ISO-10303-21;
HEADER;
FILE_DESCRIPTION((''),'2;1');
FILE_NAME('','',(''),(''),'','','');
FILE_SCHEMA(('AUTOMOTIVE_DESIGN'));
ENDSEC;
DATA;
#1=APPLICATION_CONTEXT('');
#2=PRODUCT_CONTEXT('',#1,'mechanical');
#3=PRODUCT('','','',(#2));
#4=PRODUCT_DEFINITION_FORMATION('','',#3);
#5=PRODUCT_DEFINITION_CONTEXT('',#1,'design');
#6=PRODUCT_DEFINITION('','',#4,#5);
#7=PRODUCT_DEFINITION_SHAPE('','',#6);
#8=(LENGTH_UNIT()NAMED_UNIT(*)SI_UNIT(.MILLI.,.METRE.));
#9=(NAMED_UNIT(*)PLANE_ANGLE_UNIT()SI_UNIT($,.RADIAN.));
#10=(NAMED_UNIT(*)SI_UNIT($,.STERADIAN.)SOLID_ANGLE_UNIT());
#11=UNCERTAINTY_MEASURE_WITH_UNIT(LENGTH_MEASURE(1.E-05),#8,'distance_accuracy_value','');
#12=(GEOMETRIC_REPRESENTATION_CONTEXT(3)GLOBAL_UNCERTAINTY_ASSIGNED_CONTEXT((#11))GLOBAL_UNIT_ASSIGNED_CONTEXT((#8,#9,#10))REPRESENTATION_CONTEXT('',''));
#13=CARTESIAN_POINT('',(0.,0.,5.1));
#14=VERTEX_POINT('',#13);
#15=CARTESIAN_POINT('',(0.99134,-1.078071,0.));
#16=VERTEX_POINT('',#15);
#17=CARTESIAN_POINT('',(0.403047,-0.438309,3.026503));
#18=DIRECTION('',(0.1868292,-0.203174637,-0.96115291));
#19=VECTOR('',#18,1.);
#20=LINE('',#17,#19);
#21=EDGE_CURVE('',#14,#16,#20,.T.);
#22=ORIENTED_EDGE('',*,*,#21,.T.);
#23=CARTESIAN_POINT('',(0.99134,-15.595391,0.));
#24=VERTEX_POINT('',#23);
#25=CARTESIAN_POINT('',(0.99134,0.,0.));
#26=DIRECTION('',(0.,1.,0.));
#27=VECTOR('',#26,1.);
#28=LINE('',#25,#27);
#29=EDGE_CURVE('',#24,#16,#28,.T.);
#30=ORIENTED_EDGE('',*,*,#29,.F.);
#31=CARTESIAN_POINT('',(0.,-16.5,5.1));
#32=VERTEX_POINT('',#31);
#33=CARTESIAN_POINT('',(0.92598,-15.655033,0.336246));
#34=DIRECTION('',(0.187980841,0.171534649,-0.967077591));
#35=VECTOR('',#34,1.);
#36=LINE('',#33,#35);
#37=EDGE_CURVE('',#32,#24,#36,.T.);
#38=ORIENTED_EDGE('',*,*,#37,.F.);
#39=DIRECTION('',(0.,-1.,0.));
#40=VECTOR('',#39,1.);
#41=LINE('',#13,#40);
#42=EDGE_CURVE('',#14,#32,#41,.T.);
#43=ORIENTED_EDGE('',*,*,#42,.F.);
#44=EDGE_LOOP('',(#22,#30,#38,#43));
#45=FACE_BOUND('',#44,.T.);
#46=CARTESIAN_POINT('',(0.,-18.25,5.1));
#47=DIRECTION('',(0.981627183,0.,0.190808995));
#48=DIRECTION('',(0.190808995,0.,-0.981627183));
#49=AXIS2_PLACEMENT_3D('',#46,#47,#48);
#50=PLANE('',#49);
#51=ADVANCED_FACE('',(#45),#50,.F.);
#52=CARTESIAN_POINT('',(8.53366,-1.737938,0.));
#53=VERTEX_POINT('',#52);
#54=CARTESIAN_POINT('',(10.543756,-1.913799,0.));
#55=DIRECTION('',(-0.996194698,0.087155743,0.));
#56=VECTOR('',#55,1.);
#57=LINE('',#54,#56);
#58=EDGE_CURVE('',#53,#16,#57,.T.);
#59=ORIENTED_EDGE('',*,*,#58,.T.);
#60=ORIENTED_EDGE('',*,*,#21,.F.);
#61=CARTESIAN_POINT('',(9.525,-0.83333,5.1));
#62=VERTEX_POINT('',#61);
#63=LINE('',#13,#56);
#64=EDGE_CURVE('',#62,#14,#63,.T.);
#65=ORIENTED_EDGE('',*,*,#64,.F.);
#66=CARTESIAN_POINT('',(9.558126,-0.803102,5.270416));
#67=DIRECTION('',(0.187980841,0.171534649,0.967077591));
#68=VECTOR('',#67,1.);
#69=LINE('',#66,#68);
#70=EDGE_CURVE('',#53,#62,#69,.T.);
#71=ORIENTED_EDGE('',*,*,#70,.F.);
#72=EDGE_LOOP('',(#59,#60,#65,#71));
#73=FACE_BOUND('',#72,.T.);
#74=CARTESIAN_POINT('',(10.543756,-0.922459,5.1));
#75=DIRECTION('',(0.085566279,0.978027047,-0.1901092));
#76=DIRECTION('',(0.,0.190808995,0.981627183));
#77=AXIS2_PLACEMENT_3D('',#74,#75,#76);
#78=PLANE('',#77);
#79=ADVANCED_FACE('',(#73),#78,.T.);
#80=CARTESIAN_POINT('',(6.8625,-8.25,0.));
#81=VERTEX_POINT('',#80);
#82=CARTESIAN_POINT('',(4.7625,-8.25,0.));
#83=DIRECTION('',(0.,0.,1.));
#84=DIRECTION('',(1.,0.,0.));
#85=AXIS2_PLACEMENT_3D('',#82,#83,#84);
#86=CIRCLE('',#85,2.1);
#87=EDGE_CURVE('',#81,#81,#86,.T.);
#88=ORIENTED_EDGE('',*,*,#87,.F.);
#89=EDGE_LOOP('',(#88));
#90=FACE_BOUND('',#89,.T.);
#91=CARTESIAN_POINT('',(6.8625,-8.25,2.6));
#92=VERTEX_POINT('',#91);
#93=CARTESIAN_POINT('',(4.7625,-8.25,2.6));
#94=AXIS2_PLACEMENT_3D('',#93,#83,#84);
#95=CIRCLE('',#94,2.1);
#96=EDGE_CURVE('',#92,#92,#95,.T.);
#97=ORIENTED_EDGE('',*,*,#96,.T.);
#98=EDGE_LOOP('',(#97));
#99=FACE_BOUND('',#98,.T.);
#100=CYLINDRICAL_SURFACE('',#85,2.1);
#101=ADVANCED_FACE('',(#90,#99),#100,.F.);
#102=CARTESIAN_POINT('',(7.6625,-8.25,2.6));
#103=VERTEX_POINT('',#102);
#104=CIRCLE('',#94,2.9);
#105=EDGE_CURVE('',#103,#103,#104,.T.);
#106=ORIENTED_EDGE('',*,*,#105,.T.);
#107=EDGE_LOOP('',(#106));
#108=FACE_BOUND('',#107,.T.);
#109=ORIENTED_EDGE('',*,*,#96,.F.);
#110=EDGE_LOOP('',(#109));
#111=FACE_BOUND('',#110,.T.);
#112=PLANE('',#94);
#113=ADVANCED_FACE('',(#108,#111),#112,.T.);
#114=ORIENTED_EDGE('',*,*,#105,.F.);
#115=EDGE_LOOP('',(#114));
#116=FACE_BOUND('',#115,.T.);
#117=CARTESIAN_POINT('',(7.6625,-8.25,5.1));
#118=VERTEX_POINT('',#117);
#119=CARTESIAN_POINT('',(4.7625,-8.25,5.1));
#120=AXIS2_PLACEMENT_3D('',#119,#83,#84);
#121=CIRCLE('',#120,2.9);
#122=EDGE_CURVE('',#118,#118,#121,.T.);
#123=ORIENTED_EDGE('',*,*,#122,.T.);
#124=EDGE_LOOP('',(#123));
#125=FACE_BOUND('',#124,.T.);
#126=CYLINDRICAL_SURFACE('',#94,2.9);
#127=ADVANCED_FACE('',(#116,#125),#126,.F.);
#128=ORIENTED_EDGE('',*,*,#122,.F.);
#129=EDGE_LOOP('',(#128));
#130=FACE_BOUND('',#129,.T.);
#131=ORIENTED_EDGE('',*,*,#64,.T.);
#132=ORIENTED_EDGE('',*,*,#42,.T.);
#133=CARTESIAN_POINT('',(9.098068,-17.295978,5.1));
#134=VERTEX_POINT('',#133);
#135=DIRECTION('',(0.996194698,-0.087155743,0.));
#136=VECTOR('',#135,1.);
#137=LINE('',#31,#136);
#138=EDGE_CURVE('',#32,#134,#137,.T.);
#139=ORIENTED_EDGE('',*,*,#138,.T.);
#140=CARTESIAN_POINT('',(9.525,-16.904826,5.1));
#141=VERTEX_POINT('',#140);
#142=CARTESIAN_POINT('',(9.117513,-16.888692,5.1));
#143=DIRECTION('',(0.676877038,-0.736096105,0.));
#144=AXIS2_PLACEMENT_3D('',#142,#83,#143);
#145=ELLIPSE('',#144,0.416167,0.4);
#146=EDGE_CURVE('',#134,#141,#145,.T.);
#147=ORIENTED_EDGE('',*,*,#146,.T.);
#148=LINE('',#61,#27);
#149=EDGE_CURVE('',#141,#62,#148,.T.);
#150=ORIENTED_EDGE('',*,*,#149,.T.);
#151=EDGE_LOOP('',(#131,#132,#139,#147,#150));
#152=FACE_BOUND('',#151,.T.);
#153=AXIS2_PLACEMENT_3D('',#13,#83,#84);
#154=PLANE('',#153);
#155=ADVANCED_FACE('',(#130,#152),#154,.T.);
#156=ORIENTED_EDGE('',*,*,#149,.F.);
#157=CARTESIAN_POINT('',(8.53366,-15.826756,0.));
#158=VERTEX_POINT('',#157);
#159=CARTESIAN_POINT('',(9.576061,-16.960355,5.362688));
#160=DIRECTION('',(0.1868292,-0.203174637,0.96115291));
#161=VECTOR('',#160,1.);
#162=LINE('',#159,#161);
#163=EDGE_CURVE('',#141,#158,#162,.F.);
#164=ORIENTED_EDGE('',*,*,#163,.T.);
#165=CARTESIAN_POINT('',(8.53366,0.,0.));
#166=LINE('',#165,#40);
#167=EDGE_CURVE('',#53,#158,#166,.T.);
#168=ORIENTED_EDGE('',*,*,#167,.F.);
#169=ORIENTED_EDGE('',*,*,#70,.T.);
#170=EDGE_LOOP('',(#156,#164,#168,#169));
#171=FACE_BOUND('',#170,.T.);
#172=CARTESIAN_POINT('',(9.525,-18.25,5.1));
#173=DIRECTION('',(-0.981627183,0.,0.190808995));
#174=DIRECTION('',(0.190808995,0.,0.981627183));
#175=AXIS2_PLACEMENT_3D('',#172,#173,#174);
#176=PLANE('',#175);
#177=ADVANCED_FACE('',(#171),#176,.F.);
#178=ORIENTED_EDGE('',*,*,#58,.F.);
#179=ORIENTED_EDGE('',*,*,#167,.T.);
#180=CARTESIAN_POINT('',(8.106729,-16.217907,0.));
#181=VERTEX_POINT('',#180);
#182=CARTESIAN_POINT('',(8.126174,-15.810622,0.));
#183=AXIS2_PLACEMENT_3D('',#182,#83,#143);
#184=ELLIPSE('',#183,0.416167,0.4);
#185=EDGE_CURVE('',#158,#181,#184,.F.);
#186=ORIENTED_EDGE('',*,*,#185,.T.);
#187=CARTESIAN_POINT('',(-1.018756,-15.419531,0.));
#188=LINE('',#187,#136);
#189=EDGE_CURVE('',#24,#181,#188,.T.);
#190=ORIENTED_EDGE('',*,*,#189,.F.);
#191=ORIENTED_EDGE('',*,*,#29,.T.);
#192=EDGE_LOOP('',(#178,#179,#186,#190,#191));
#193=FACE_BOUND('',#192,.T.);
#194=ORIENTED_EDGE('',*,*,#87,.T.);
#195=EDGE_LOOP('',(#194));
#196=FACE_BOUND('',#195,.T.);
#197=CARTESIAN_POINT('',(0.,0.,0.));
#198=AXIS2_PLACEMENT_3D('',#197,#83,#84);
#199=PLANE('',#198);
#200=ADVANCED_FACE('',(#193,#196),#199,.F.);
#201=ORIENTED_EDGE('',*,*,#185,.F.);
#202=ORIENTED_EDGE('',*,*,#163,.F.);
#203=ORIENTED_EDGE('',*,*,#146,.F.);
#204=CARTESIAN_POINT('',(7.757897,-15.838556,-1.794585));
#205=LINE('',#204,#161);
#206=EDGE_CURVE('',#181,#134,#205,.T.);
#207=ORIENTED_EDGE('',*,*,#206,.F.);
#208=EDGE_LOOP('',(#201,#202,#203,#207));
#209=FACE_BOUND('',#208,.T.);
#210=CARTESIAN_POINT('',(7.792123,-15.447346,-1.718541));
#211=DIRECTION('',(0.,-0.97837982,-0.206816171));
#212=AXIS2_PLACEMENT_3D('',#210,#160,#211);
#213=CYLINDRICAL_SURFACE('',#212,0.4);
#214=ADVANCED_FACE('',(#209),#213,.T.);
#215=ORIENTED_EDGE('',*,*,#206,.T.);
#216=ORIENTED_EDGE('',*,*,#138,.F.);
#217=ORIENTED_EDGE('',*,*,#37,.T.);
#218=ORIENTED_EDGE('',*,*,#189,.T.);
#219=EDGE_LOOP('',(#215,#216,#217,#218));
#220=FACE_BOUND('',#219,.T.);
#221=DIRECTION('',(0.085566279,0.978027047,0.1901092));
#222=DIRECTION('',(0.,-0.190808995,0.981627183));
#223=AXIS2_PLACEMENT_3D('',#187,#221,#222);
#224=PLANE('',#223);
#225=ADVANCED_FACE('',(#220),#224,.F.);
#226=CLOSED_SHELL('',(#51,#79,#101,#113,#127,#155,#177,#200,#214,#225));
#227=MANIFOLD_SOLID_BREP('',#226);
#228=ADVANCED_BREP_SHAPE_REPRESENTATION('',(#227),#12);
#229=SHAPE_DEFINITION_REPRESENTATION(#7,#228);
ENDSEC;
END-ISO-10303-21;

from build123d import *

# Parameters (mm, degrees)
EXTRUDE_1_DEPTH     = 5.1
CUT_EXTRUDE_1_DEPTH = 10
SWEEP_START         = -0.969556918
SWEEP_2_OUTLINE_W   = 12
SWEEP_2_OUTLINE_H   = 9
SWEEP_2_DEPTH       = 0.969556918
SWEEP_START_2       = -16.13744627
SWEEP_3_OUTLINE_W   = 12
SWEEP_3_OUTLINE_H   = 9
SWEEP_3_DEPTH       = 0.969556918
FILLET_2_R          = 0.4
SKETCH_13_R         = 2.9
CUT_EXTRUDE_3_DEPTH = 2.5
SKETCH_14_R         = 2.1
CUT_EXTRUDE_4_DEPTH = 20.917083723


# Read off the part's stored shape, not the designer's step: 切除-扫描2, 切除-扫描3
with BuildPart() as part:
    # 草图1 → 凸台-拉伸1 (new body)
    with BuildSketch(Plane.XY):
        Polygon((0, 0), (9.525, -0.83332952), (9.525, -17.33332952), (0, -16.5), align=None)
    extrude(amount=EXTRUDE_1_DEPTH)

    # 草图4 → 切除-拉伸1 (cut, symmetric)
    with BuildSketch(Plane(origin=(0, -8.25, 0), x_dir=(1, 0, 0), z_dir=(0, 1, 0))):
        Polygon((0, -5.1), (0.991339577, 0), (0, 0), align=None)
        Polygon((9.525, -5.1), (8.533660423, 0), (9.525, 0), align=None)
    extrude(amount=CUT_EXTRUDE_1_DEPTH, both=True, mode=Mode.SUBTRACT)

    # 切除-扫描2 outline → 切除-扫描2 (cut)
    with BuildSketch(Plane(origin=(0, 0, 0), x_dir=(0.9963324805819772, -0.08399418565625866, 0.016326815773634484), z_dir=(0.08556627920719848, 0.9780270466911105, -0.19010919968086795)).offset(SWEEP_START)):
        with Locations((5, -2.5)):
            Rectangle(SWEEP_2_OUTLINE_W, SWEEP_2_OUTLINE_H)
    extrude(amount=SWEEP_2_DEPTH, mode=Mode.SUBTRACT)

    # 切除-扫描3 outline → 切除-扫描3 (cut)
    with BuildSketch(Plane(origin=(0, 0, 0), x_dir=(0.9963324805819772, -0.08399418565625832, -0.016326815773633797), z_dir=(0.08556627920719802, 0.978027046691112, 0.190109199680861)).offset(SWEEP_START_2)):
        with Locations((6, -5.5)):
            Rectangle(SWEEP_3_OUTLINE_W, SWEEP_3_OUTLINE_H)
    extrude(amount=SWEEP_3_DEPTH, mode=Mode.SUBTRACT)

    # 圆角2
    fillet_2_edges = [part.edges().sort_by_distance(p)[0] for p in [
        (9.029330212, -16.794294244, 2.55),
    ]]
    fillet(fillet_2_edges, radius=FILLET_2_R)

    # 草图13 → 切除-拉伸3 (cut)
    with BuildSketch(Plane.XY.offset(5.1)):
        with Locations((4.7625, -8.25)):
            Circle(SKETCH_13_R)
    extrude(amount=-CUT_EXTRUDE_3_DEPTH, mode=Mode.SUBTRACT)

    # 草图14 → 切除-拉伸4 (cut, through all)
    with BuildSketch(Plane.XY.offset(2.6)):
        with Locations((4.7625, -8.25)):
            Circle(SKETCH_14_R)
    extrude(amount=-CUT_EXTRUDE_4_DEPTH, mode=Mode.SUBTRACT)


solid = part.part
